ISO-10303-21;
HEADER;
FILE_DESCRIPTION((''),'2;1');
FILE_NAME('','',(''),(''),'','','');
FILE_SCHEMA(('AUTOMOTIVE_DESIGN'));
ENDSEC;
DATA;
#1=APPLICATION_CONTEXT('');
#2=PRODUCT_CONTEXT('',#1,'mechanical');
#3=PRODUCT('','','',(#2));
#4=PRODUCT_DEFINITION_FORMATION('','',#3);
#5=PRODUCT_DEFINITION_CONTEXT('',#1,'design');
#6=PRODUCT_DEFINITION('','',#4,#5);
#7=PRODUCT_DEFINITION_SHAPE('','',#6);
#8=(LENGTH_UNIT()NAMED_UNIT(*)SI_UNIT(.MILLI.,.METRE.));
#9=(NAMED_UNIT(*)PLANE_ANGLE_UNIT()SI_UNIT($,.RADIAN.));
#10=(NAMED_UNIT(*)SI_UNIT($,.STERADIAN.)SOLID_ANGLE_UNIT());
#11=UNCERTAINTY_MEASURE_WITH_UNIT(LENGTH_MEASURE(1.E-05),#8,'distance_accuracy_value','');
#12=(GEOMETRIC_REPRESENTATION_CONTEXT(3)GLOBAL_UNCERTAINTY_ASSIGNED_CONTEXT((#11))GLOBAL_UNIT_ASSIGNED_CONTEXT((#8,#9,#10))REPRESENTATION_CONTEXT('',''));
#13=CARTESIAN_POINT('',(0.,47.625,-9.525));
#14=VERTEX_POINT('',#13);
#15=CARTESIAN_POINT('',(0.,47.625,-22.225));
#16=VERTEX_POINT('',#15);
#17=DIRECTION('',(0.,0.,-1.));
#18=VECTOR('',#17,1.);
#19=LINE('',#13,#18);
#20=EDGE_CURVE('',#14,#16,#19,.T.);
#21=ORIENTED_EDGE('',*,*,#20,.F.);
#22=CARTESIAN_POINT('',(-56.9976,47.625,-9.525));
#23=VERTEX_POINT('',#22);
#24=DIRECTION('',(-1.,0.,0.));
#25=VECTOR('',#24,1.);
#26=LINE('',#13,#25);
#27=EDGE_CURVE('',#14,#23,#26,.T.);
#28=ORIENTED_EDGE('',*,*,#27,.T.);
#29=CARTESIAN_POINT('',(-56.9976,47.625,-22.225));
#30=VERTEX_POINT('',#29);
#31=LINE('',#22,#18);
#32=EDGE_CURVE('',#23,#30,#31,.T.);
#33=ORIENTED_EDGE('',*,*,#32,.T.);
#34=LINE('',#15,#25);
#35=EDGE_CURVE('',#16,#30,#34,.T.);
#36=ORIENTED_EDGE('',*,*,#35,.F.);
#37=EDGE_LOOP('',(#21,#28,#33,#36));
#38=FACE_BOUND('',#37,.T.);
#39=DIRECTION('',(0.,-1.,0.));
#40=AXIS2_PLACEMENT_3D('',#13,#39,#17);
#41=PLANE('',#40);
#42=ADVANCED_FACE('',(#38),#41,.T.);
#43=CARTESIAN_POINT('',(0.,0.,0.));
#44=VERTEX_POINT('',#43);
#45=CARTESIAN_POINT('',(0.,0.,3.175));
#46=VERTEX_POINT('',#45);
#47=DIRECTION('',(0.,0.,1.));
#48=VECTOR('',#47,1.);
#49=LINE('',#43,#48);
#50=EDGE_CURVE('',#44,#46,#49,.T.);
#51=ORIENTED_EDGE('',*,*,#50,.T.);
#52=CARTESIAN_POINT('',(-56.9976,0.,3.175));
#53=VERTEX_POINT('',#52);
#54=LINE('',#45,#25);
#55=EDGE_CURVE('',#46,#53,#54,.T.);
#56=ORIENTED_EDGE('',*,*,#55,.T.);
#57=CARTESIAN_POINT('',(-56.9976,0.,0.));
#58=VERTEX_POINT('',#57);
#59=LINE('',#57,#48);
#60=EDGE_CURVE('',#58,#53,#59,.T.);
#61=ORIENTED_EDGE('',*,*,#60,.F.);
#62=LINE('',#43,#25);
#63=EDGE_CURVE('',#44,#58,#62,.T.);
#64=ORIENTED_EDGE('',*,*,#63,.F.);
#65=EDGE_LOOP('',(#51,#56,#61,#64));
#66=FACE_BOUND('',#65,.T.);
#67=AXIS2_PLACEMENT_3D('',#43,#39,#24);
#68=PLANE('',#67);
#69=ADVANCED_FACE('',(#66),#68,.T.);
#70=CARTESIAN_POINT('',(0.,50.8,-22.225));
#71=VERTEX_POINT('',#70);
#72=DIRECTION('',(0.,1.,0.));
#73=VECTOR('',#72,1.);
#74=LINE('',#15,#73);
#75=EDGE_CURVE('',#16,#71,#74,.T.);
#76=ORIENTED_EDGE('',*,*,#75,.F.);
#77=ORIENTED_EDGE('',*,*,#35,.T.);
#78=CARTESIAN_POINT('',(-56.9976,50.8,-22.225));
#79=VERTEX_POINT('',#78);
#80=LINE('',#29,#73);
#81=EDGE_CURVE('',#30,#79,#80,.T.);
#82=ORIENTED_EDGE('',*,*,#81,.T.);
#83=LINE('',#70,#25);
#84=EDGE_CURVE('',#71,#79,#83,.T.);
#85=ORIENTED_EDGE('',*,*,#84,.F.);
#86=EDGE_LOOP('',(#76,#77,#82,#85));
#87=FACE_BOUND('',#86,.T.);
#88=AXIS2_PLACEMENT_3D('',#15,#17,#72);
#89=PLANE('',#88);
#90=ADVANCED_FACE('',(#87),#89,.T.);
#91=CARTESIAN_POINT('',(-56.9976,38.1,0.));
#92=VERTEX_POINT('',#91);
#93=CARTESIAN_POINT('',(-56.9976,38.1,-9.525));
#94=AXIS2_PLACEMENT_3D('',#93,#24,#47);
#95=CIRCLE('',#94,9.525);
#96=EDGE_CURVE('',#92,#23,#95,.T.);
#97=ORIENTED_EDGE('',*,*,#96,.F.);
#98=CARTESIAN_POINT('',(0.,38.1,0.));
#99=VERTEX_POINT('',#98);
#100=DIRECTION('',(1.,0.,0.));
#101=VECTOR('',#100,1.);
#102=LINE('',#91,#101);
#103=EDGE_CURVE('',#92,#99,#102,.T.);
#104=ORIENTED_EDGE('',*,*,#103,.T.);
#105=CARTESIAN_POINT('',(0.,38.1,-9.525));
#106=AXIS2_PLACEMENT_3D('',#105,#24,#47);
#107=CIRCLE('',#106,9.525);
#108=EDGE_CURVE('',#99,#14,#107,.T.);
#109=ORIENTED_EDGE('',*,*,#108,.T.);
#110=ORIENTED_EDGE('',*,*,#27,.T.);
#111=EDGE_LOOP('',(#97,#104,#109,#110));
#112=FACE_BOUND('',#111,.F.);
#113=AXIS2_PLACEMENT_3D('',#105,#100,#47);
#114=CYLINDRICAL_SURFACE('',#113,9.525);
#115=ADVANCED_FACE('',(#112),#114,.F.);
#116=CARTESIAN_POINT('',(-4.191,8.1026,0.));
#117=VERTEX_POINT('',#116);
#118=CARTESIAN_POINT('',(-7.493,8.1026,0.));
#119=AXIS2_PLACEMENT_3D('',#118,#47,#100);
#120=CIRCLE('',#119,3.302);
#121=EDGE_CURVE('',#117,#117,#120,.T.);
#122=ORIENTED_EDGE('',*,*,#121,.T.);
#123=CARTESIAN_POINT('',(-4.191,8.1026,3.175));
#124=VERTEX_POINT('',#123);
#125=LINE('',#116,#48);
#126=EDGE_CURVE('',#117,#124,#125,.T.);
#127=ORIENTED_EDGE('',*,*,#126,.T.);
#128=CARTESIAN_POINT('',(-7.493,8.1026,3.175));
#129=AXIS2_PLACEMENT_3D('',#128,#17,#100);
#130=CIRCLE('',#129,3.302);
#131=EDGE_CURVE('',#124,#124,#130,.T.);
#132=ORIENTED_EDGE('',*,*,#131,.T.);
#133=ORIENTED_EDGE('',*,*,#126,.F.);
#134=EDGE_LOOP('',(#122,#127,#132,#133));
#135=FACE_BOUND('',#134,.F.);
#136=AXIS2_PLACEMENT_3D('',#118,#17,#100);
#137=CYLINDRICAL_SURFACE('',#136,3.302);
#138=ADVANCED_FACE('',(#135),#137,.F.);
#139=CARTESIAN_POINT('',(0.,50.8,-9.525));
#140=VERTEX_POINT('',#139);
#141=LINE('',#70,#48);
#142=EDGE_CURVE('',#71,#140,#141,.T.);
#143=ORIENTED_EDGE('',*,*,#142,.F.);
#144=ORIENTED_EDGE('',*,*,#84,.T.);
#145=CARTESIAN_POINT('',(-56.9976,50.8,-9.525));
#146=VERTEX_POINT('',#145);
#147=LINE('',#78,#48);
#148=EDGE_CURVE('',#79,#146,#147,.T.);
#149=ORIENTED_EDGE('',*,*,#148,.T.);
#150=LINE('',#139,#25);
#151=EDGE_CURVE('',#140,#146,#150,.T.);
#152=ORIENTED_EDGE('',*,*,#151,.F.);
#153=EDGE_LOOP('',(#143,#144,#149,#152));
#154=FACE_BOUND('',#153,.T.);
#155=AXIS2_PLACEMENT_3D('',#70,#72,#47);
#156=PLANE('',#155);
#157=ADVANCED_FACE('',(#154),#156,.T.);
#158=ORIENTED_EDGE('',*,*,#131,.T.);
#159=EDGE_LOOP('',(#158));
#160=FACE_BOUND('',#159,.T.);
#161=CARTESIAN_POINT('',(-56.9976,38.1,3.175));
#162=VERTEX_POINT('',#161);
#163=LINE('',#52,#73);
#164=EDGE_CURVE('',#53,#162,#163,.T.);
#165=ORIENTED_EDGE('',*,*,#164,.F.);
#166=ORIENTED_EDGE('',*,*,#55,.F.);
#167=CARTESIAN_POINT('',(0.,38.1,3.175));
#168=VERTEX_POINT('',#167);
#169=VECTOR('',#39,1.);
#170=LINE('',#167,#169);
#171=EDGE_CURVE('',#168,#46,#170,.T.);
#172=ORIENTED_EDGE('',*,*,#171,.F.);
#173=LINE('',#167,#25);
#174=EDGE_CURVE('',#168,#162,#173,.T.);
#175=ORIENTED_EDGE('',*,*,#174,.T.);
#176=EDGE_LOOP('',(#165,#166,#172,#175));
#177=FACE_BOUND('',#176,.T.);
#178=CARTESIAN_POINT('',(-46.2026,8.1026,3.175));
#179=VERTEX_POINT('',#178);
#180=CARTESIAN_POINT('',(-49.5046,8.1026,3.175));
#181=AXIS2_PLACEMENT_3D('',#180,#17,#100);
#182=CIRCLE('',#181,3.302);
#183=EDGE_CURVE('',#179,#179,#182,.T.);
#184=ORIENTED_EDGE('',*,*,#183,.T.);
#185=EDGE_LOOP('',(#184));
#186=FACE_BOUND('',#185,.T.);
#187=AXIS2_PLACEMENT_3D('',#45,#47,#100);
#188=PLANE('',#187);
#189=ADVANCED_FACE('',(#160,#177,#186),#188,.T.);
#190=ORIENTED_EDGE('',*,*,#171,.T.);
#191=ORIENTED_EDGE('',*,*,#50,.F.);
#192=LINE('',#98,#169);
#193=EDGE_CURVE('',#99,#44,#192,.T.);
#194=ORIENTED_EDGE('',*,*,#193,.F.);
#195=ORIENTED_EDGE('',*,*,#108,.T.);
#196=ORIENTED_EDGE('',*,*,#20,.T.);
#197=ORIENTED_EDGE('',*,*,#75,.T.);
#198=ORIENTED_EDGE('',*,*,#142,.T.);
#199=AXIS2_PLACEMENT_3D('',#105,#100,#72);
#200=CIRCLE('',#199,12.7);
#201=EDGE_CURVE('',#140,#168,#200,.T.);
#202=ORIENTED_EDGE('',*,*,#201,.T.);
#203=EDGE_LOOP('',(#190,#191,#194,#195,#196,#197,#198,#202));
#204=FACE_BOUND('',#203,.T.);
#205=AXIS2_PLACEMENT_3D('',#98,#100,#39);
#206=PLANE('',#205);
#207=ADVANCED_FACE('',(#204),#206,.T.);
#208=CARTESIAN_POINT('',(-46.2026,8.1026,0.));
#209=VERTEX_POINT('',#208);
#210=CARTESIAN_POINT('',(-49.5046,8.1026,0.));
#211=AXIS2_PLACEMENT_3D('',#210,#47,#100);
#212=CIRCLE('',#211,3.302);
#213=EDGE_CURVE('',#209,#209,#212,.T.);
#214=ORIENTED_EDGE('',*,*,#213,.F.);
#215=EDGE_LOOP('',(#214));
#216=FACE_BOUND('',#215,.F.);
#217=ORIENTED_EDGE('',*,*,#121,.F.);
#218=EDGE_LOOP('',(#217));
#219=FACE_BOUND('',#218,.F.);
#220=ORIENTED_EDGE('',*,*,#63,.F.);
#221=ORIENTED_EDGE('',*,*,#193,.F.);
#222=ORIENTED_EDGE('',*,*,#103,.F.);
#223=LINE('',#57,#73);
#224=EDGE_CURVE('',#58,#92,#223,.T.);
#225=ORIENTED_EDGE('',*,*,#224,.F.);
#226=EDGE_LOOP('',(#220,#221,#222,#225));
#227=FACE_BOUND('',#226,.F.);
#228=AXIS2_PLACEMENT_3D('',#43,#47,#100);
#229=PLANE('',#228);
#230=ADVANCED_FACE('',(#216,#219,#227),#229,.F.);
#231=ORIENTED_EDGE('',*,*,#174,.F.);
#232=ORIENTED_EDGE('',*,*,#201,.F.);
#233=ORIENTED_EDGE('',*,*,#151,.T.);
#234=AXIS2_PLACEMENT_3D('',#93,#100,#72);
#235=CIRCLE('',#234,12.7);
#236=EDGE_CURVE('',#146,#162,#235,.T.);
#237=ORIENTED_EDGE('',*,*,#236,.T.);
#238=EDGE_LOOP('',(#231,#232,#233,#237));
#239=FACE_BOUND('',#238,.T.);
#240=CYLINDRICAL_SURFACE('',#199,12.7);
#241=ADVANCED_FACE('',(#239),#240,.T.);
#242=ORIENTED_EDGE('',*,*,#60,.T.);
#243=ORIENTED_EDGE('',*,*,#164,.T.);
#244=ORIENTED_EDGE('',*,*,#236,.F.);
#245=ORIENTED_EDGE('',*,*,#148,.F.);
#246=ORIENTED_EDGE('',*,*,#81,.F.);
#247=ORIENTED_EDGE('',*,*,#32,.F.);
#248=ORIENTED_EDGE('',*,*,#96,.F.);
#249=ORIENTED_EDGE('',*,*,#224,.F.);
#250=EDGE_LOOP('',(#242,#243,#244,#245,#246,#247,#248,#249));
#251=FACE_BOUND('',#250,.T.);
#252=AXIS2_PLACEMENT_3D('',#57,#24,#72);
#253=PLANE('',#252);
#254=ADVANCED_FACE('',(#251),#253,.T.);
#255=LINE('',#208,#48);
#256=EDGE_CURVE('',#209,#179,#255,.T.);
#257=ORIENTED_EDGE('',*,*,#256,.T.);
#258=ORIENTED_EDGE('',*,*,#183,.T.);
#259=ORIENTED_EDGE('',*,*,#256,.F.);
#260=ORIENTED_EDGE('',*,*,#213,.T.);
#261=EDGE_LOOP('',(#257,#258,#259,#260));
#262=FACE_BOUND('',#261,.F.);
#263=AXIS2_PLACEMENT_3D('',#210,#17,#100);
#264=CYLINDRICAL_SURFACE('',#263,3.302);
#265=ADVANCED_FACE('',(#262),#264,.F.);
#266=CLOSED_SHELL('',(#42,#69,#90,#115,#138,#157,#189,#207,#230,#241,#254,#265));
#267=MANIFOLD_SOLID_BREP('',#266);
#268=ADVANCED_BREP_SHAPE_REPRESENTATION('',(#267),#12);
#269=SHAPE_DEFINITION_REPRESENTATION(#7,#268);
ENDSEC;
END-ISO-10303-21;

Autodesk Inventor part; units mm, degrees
ref_plane "YZ Plane" through (0, 0, 0) normal (1, 0, 0) x (0, 1, 0)
ref_plane "XZ Plane" through (0, 0, 0) normal (0, 1, 0) x (-1, 0, 0)
ref_plane "XY Plane" through (0, 0, 0) normal (0, 0, 1) x (1, 0, 0)
sketch "Sketch1" plane through (0, 0, 0) normal (0, 0, 1) x (1, 0, 0)
  line L0 (0, 0) -> (-56.9976, 0)
  line L1 (-56.9976, 0) -> (-56.9976, 38.1)
  line L2 (-56.9976, 38.1) -> (0, 38.1)
  line L3 (0, 38.1) -> (0, 0)
  line L4 (0, 38.1) -> (-7.493, 38.1)
  line L5 (-7.493, 38.1) -> (-7.493, 8.1026)
  line L6 (-56.9976, 38.1) -> (-49.5046, 38.1)
  line L7 (-49.5046, 38.1) -> (-49.5046, 8.1026)
  circle A0 centre (-49.5046, 8.1026) radius 3.302
  circle A1 centre (-7.493, 8.1026) radius 3.302
  dimension "d1" = 56.9976
  dimension "d2" = 38.1
  dimension "d3" = 7.493
  dimension "d4" = 29.9974
  dimension "d5" = 7.493
  dimension "d6" = 6.604
  dimension "d7" = 6.604
extrude "Plate1" add sketch "Sketch1" along normal blind 3.175
sketch "Sketch2" plane through (0, 47.625, -9.525) normal (0, 1, 0) x (-1, 0, 0)
  line L0 (56.9976, 0) -> (0, 0)
  line L1 (0, 0) -> (0, -12.7)
  line L2 (0, -12.7) -> (56.9976, -12.7)
  line L3 (56.9976, -12.7) -> (56.9976, 0)
edge flange "Flange1" height 25.4 angle 90 thickness 3.175 bend radius 9.525 thickness toward (0, 1, 0) relief tear relief width 3.175 relief depth 1.5875 edges at (-53.2511, 38.1, 0) wall of the first edge with corners at (-56.9976, 47.625, -9.525) (0, 47.625, -9.525) (0, 47.625, -22.225) (-56.9976, 47.625, -22.225)
bend "Bend1"
corner "Corner1"
sketch "Sketch3" plane through (-56.9976, 50.8, -22.225) normal (0, 1, 0) x (1, 0, 0)
  line L0 (0, -12.7) -> (56.9976, -12.7) projected
  line L1 (56.9976, 0) -> (56.9976, -12.7) projected
  line L2 (0, 0) -> (56.9976, 0) projected
  line L3 (0, -12.7) -> (0, 0) projected
  point P0 (56.9976, -22.225)
sketch "Sketch4" plane through (-56.9976, 50.8, -22.225) normal (0, 1, 0) x (1, 0, 0)
  line L0 (0, -12.7) -> (56.9976, -12.7) projected
  line L1 (56.9976, 0) -> (56.9976, -12.7) projected
  line L2 (0, 0) -> (56.9976, 0) projected
  line L3 (0, -12.7) -> (0, 0) projected
  point P0 (56.9976, -22.225)
sketch "Sketch5" plane through (-56.9976, 50.8, -22.225) normal (0, 1, 0) x (1, 0, 0)
  line L0 (0, -12.7) -> (56.9976, -12.7) projected
  line L1 (56.9976, 0) -> (56.9976, -12.7) projected
  line L2 (0, 0) -> (56.9976, 0) projected
  line L3 (0, -12.7) -> (0, 0) projected
  point P0 (56.9976, -22.225)
sketch "Sketch6" plane through (-56.9976, 50.8, -22.225) normal (0, 1, 0) x (1, 0, 0)
  line L0 (0, -12.7) -> (56.9976, -12.7) projected
  line L1 (56.9976, 0) -> (56.9976, -12.7) projected
  line L2 (0, 0) -> (56.9976, 0) projected
  line L3 (0, -12.7) -> (0, 0) projected
  point P0 (56.9976, -22.225)
equation "\"d9\" = BendReliefWidth"
equation "\"d10\" = BendReliefDepth"
equation "\"d11\" = MinimumRemnant"
equation "\"d12\" = BendRadius"
equation "\"d16\" = CornerReliefSize"
equation "\"d17\" = GapSize"
equation "\"d18\" = JacobiRadiusSize"
equation "\"BendRadius\" = Thickness"
equation "\"BendReliefWidth\" = Thickness"
equation "\"BendReliefDepth\" = 0.5 * Thickness"
equation "\"CornerReliefSize\" = 4 * Thickness"
equation "\"MinimumRemnant\" = 2 * Thickness"
equation "\"TransitionRadius\" = BendRadius"
equation "\"JacobiRadiusSize\" = BendRadius"
equation "\"GapSize\" = Thickness"
equation "\"d8\" = BendRadius"
equation "\"Thickness\" = 3.175"
properties part number "endstop"
